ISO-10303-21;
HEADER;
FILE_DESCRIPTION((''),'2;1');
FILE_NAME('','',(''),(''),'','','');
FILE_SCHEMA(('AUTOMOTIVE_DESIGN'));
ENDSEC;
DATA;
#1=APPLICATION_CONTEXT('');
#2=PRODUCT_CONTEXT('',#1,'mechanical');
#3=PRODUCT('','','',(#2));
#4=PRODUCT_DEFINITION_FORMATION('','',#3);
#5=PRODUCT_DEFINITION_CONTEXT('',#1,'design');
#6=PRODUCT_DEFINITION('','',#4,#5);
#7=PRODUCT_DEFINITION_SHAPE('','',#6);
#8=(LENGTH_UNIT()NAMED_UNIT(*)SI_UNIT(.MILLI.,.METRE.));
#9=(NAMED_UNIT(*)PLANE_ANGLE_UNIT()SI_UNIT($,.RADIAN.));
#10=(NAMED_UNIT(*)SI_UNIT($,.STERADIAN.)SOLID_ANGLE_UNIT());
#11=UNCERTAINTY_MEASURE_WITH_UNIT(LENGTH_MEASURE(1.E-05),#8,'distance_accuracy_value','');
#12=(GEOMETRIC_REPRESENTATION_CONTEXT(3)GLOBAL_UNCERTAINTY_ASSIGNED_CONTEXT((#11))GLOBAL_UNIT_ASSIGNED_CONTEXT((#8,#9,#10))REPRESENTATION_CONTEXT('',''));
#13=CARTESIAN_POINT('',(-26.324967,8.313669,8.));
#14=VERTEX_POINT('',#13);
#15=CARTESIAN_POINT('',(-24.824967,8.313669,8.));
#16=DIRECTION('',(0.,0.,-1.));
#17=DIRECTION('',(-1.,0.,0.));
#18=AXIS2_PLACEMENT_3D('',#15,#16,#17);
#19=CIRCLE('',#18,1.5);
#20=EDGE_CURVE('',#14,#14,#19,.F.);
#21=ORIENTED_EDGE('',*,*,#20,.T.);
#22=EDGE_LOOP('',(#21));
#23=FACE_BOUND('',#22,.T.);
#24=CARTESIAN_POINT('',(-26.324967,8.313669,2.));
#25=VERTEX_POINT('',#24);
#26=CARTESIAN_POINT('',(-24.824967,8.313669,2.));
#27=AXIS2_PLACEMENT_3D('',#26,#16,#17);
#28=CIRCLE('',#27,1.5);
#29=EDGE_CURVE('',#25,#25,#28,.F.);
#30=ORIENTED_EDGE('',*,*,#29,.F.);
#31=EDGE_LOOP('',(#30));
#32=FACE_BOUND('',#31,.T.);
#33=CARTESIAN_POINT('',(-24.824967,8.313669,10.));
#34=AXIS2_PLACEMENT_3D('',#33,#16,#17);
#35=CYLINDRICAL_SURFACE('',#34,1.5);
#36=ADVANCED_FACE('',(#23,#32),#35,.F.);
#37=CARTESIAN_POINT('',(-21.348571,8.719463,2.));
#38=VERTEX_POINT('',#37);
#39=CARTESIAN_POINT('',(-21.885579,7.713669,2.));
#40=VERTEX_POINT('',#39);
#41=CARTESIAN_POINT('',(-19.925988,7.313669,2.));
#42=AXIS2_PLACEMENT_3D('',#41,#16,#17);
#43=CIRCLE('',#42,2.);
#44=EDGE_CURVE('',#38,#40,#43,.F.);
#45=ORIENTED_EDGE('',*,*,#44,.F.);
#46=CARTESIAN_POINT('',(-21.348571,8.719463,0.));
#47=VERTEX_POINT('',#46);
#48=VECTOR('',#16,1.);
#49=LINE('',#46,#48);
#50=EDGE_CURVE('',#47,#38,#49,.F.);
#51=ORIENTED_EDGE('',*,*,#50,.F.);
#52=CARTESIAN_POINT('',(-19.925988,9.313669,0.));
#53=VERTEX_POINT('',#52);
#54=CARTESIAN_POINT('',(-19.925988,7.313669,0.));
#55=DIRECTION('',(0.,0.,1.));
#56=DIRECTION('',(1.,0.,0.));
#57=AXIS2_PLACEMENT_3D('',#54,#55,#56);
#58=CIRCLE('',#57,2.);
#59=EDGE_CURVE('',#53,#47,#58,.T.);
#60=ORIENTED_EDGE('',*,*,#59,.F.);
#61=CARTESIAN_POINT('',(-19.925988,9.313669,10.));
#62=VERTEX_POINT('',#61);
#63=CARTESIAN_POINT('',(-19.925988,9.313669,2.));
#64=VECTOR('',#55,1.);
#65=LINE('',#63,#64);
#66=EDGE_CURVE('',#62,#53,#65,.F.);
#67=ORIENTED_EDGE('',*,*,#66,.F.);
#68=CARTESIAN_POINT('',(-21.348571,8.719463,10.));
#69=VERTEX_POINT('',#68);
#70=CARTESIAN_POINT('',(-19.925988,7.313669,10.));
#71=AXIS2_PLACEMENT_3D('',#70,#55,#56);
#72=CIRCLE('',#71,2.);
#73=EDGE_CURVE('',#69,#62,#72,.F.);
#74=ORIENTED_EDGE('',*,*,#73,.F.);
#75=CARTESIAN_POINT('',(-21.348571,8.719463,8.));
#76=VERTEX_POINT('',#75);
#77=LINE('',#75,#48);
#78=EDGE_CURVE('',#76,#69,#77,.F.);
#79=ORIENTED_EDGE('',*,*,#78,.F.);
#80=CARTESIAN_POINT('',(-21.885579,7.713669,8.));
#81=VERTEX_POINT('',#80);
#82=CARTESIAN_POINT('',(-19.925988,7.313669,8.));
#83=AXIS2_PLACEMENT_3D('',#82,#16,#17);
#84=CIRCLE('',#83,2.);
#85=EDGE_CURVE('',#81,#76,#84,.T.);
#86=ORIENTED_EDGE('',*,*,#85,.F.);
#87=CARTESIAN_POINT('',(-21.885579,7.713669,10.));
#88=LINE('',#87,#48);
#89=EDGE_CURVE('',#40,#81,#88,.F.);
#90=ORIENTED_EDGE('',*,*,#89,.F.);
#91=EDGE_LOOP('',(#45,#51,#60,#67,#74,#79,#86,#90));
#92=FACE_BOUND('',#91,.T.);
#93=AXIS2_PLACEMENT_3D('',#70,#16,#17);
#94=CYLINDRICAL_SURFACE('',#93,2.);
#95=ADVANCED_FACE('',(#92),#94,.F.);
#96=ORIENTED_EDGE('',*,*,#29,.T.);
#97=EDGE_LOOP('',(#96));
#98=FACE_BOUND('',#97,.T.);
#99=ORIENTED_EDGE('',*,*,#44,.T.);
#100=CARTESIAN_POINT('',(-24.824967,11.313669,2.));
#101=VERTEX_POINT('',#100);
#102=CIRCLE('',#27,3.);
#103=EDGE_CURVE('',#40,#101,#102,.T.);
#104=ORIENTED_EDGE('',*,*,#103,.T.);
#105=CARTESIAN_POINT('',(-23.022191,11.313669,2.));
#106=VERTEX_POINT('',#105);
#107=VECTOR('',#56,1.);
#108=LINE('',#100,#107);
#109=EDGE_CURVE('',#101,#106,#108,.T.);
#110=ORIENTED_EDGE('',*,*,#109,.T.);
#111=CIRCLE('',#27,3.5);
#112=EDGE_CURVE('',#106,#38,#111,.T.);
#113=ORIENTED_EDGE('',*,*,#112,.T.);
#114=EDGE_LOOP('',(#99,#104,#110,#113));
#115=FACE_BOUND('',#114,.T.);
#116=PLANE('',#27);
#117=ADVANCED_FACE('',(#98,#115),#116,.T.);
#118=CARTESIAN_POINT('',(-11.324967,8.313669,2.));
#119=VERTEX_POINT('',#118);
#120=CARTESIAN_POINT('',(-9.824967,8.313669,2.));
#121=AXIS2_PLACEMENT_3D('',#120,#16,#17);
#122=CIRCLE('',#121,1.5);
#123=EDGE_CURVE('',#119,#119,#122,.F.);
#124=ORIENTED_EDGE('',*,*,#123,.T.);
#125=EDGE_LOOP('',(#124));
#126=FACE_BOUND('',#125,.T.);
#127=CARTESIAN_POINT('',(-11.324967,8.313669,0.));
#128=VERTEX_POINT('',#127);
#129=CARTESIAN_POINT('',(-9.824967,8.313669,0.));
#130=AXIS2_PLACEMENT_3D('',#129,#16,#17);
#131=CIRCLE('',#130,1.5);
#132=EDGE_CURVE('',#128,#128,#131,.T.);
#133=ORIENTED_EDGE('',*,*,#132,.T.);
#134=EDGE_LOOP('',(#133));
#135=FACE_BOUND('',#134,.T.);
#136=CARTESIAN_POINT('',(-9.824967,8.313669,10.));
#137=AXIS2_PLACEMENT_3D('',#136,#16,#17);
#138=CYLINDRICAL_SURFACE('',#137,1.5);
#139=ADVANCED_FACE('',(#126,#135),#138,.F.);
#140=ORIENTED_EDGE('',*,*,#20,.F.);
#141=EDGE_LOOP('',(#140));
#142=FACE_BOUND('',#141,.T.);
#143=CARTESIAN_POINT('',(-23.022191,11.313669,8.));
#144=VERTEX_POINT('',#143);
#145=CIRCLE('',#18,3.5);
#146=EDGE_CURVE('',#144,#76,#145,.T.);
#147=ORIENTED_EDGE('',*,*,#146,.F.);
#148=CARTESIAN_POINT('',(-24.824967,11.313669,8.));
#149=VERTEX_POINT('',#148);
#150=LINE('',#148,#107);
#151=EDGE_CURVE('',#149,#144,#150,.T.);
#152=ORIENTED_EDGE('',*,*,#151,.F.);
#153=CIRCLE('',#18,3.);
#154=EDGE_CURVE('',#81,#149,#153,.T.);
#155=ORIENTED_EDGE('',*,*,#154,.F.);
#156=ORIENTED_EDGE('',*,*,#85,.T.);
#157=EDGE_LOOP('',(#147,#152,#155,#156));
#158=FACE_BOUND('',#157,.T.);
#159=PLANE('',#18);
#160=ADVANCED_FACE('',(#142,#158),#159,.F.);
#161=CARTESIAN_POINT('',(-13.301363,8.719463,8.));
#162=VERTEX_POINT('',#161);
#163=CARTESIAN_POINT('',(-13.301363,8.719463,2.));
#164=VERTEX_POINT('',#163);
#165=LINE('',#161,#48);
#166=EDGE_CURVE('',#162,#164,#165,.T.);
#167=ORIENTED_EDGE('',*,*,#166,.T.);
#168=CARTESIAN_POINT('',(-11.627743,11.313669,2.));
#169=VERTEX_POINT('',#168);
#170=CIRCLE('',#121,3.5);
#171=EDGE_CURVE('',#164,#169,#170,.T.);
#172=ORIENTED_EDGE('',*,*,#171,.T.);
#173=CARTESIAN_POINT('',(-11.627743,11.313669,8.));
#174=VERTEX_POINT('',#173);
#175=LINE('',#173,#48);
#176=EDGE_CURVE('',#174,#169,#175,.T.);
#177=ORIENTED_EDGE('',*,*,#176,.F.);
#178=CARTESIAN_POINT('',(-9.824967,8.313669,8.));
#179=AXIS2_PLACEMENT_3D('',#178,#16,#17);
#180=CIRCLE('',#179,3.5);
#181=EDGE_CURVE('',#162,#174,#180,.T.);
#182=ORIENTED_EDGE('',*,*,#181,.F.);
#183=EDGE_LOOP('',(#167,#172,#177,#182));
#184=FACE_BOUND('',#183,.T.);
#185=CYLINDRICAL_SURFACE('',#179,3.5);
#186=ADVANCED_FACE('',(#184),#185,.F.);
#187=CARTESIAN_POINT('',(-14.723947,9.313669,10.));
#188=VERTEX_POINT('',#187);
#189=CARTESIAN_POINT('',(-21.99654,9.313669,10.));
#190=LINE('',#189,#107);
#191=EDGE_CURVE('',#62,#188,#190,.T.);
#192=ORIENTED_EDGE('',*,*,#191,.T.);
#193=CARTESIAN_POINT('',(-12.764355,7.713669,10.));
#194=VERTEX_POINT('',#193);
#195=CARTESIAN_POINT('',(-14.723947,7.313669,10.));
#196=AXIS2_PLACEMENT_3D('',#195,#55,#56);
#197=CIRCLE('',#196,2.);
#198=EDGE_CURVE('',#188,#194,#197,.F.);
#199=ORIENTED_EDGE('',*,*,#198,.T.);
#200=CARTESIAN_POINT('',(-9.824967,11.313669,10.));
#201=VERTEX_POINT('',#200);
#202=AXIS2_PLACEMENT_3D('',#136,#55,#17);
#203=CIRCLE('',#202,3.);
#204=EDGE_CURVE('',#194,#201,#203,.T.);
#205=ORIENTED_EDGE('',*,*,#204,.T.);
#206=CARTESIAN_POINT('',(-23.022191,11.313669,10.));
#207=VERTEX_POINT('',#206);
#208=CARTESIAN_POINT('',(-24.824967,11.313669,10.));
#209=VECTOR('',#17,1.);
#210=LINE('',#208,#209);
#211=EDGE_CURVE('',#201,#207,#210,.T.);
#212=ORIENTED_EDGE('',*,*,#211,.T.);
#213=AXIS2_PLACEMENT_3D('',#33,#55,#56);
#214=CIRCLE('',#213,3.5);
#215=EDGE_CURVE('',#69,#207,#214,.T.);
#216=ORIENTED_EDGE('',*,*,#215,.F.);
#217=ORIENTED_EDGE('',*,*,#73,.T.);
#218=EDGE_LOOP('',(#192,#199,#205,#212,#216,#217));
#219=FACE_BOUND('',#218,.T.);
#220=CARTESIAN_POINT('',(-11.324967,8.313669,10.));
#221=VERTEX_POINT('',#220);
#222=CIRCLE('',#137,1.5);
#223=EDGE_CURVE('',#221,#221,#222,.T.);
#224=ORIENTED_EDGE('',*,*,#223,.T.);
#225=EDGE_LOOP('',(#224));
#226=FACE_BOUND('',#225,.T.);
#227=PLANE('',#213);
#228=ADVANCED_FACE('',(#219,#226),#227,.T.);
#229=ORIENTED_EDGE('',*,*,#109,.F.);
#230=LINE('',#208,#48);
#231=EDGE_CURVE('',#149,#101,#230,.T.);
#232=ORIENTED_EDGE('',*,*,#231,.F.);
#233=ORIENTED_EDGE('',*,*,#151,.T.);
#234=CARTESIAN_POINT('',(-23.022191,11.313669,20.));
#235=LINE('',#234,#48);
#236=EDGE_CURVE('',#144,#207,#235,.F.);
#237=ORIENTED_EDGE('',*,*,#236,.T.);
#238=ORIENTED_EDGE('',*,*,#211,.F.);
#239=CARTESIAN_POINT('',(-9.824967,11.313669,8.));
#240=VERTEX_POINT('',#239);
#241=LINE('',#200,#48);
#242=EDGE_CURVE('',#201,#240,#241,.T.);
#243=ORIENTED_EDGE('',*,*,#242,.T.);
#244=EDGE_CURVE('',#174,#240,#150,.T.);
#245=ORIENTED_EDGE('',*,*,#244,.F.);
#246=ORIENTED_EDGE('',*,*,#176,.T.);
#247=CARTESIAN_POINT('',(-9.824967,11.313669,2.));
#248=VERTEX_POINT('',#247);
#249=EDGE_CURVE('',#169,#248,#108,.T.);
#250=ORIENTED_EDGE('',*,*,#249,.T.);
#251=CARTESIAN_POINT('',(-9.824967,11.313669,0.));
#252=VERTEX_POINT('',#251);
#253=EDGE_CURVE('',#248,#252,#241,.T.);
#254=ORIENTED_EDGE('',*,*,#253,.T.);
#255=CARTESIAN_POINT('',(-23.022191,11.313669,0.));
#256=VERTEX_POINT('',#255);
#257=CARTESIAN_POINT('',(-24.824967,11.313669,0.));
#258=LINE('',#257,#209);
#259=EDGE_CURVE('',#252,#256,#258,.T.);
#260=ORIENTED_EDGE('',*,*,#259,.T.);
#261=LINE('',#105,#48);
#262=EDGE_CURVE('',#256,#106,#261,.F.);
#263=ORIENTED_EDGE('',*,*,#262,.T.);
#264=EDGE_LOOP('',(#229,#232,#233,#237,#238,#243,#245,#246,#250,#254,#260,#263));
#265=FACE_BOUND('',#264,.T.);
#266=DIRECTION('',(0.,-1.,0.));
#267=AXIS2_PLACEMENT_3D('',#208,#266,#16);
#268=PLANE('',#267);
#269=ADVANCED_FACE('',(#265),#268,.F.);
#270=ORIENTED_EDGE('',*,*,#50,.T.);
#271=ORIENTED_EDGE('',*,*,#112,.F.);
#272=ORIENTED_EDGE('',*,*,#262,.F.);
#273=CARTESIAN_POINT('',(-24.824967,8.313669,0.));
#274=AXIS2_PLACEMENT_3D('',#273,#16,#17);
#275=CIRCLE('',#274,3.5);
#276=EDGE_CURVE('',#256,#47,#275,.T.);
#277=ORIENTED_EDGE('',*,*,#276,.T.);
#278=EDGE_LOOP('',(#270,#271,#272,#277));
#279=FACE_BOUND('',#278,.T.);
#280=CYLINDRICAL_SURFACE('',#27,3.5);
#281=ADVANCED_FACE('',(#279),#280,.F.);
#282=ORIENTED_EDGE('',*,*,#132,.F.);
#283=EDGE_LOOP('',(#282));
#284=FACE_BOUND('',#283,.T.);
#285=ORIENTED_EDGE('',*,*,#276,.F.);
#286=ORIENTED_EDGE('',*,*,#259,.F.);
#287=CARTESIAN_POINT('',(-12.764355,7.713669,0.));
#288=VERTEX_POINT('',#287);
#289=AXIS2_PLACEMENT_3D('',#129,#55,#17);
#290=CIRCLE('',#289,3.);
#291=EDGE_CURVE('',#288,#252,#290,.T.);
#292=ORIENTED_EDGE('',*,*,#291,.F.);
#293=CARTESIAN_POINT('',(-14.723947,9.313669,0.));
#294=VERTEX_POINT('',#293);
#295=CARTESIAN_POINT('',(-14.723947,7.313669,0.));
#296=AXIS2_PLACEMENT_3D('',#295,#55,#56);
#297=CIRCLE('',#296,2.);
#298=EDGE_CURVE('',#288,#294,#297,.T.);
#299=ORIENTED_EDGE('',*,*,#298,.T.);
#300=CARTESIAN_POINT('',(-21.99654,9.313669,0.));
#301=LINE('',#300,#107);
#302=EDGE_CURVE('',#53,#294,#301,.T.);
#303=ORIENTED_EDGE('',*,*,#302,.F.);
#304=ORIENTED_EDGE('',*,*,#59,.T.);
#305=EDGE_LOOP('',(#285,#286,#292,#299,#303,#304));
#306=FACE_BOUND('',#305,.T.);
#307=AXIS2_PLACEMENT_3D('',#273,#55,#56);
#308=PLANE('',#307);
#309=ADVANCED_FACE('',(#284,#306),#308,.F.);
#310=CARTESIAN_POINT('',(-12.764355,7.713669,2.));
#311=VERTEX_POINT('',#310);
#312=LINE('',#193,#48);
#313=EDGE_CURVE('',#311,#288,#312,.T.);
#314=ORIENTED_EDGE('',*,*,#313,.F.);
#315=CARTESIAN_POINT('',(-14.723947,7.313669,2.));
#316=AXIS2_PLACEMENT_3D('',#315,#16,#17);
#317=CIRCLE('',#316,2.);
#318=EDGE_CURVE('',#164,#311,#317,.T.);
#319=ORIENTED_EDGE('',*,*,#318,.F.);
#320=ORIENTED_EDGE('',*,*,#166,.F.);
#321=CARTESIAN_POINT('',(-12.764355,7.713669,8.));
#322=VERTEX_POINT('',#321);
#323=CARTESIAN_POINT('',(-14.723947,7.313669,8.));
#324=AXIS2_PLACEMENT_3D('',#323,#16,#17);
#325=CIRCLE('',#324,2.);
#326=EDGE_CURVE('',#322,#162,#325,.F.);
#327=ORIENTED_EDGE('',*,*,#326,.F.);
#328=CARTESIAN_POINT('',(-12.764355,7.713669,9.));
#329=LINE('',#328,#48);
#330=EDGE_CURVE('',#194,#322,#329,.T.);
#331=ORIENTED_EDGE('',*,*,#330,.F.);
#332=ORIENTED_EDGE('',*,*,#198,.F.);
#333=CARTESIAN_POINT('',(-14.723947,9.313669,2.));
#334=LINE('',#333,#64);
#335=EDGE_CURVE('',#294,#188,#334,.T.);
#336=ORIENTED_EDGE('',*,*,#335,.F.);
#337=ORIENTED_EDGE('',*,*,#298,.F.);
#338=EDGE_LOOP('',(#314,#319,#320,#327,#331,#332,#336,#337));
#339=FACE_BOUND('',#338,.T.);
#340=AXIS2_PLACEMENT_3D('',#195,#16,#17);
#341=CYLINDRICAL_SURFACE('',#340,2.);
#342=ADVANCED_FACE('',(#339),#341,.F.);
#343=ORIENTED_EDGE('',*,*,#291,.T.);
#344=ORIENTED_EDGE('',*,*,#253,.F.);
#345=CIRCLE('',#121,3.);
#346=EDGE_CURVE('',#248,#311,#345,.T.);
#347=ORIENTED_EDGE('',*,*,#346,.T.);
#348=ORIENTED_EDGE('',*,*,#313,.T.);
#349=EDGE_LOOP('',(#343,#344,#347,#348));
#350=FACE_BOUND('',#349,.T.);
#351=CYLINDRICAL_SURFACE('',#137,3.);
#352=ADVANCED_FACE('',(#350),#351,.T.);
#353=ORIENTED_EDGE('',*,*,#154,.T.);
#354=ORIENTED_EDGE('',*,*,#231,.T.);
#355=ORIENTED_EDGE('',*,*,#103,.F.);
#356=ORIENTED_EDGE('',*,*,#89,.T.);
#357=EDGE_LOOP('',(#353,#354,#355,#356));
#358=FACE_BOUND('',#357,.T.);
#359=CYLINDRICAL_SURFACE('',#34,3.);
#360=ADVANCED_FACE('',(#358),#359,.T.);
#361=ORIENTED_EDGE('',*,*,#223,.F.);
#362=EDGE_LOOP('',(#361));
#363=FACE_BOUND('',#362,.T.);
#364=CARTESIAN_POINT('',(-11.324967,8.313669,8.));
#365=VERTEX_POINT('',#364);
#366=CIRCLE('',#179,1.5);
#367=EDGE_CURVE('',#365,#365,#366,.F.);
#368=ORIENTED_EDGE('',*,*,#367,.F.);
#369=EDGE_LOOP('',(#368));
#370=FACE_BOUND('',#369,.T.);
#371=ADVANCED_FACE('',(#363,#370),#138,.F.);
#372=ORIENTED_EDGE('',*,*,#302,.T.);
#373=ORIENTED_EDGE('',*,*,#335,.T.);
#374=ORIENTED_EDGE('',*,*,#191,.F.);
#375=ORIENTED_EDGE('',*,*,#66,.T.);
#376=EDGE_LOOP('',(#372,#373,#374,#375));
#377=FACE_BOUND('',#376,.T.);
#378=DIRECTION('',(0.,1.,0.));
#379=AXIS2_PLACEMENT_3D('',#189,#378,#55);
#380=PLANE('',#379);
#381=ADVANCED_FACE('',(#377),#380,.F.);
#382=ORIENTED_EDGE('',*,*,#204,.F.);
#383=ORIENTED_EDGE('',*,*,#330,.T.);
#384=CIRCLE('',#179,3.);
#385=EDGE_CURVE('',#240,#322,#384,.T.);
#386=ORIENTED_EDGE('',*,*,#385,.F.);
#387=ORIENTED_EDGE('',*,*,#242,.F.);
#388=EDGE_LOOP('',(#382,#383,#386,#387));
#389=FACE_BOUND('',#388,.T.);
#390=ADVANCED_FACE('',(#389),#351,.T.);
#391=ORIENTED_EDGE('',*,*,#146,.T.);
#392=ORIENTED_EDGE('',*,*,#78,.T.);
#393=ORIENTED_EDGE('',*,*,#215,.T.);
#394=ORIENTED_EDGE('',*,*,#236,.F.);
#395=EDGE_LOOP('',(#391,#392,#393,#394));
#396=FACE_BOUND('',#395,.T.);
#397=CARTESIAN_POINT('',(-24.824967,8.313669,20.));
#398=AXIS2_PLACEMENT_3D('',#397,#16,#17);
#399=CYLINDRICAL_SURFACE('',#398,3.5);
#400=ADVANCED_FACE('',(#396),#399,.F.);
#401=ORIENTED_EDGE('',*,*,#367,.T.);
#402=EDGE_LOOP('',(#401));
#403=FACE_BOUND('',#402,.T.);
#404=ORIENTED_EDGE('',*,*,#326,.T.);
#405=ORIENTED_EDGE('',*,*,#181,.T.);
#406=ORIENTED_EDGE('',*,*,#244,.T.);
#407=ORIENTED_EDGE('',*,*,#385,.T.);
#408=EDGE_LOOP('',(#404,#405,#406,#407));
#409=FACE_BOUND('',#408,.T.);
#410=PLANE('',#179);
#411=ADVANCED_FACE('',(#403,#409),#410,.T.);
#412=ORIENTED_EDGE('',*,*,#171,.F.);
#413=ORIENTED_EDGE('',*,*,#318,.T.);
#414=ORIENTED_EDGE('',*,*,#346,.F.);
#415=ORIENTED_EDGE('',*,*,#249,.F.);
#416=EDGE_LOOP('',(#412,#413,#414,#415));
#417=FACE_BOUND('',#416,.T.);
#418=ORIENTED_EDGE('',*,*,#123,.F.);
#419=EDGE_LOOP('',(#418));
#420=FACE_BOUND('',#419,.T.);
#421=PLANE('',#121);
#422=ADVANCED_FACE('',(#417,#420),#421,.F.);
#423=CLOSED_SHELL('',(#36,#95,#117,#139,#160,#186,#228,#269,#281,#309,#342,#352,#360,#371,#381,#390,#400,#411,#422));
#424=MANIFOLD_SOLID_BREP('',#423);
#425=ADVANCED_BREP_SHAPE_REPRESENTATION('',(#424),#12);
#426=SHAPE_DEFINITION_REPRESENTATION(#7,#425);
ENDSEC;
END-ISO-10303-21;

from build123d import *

# Parameters (mm, degrees)
ESTRUSIONE_ESTRUSIONE1_DEPTH = 10
SCHIZZO5_R                   = 1.499999999999997
SCHIZZO5_R_2                 = 1.5000000000000009
TAGLIO_ESTRUSIONE1_DEPTH     = 10
SCHIZZO6_R                   = 3.4999999999999996
TAGLIO_ESTRUSIONE2_DEPTH     = 2
TAGLIO_ESTRUSIONE3_START     = -8
SCHIZZO6_2_R                 = 3.4999999999999996
TAGLIO_ESTRUSIONE3_DEPTH     = 12
TAGLIO_ESTRUSIONE4_START     = -2
SCHIZZO7_R                   = 3.4999999999999996
TAGLIO_ESTRUSIONE4_DEPTH     = 6
RACCORDO1_R                  = 2
RACCORDO2_R                  = 2


with BuildPart() as part:
    # Schizzo1 → Estrusione-Estrusione1 (new body)
    with BuildSketch(Plane.XY):
        with BuildLine():
            Line((-24.824967096652905, 11.313668704827196), (-9.824967096652905, 11.313668704827196))
            ThreePointArc((-9.824967096652905, 11.313668704827196), (-8.092916289084027, 5.864178962044019), (-12.653394221399095, 9.313668704827194))
            Line((-12.653394221399095, 9.313668704827194), (-21.996539971906714, 9.313668704827194))
            ThreePointArc((-21.996539971906714, 9.313668704827194), (-26.557017904221784, 5.864178962044019), (-24.824967096652905, 11.313668704827196))
        make_face()
    extrude(amount=ESTRUSIONE_ESTRUSIONE1_DEPTH)

    # Schizzo5 → Taglio-Estrusione1 (cut)
    with BuildSketch(Plane(origin=(0, 0, 0), x_dir=(-1, 0, 0), z_dir=(0, 0, -1))):
        with Locations((9.824967096652905, 8.313668704827196)):
            Circle(SCHIZZO5_R)
        with Locations((24.824967096652905, 8.313668704827196)):
            Circle(SCHIZZO5_R_2)
    extrude(amount=-TAGLIO_ESTRUSIONE1_DEPTH, mode=Mode.SUBTRACT)

    # Schizzo6 → Taglio-Estrusione2 (cut)
    with BuildSketch(Plane(origin=(0, 0, 0), x_dir=(-1, 0, 0), z_dir=(0, 0, -1))):
        with Locations((24.824967096652905, 8.313668704827196)):
            Circle(SCHIZZO6_R)
    extrude(amount=-TAGLIO_ESTRUSIONE2_DEPTH, mode=Mode.SUBTRACT)

    # Schizzo6<2> → Taglio-Estrusione3 (cut)
    with BuildSketch(Plane(origin=(0, 0, 0), x_dir=(-1, 0, 0), z_dir=(0, 0, -1)).offset(TAGLIO_ESTRUSIONE3_START)):
        with Locations((24.824967096652905, 8.313668704827196)):
            Circle(SCHIZZO6_2_R)
    extrude(amount=-TAGLIO_ESTRUSIONE3_DEPTH, mode=Mode.SUBTRACT)

    # Schizzo7 → Taglio-Estrusione4 (cut)
    with BuildSketch(Plane(origin=(0, 0, 0), x_dir=(-1, 0, 0), z_dir=(0, 0, -1)).offset(TAGLIO_ESTRUSIONE4_START)):
        with Locations((9.824967096652905, 8.313668704827196)):
            Circle(SCHIZZO7_R)
    extrude(amount=-TAGLIO_ESTRUSIONE4_DEPTH, mode=Mode.SUBTRACT)

    # Raccordo1
    raccordo1_edges = [part.edges().sort_by_distance(p)[0] for p in [
        (-21.996539971906714, 9.313668704827194, 5),
    ]]
    fillet(raccordo1_edges, radius=RACCORDO1_R)

    # Raccordo2
    raccordo2_edges = [part.edges().sort_by_distance(p)[0] for p in [
        (-12.653394221399093, 9.313668704827194, 1),
    ]]
    fillet(raccordo2_edges, radius=RACCORDO2_R - 0.0001)  # a hair under: the kernel refuses the full size


solid = part.part
